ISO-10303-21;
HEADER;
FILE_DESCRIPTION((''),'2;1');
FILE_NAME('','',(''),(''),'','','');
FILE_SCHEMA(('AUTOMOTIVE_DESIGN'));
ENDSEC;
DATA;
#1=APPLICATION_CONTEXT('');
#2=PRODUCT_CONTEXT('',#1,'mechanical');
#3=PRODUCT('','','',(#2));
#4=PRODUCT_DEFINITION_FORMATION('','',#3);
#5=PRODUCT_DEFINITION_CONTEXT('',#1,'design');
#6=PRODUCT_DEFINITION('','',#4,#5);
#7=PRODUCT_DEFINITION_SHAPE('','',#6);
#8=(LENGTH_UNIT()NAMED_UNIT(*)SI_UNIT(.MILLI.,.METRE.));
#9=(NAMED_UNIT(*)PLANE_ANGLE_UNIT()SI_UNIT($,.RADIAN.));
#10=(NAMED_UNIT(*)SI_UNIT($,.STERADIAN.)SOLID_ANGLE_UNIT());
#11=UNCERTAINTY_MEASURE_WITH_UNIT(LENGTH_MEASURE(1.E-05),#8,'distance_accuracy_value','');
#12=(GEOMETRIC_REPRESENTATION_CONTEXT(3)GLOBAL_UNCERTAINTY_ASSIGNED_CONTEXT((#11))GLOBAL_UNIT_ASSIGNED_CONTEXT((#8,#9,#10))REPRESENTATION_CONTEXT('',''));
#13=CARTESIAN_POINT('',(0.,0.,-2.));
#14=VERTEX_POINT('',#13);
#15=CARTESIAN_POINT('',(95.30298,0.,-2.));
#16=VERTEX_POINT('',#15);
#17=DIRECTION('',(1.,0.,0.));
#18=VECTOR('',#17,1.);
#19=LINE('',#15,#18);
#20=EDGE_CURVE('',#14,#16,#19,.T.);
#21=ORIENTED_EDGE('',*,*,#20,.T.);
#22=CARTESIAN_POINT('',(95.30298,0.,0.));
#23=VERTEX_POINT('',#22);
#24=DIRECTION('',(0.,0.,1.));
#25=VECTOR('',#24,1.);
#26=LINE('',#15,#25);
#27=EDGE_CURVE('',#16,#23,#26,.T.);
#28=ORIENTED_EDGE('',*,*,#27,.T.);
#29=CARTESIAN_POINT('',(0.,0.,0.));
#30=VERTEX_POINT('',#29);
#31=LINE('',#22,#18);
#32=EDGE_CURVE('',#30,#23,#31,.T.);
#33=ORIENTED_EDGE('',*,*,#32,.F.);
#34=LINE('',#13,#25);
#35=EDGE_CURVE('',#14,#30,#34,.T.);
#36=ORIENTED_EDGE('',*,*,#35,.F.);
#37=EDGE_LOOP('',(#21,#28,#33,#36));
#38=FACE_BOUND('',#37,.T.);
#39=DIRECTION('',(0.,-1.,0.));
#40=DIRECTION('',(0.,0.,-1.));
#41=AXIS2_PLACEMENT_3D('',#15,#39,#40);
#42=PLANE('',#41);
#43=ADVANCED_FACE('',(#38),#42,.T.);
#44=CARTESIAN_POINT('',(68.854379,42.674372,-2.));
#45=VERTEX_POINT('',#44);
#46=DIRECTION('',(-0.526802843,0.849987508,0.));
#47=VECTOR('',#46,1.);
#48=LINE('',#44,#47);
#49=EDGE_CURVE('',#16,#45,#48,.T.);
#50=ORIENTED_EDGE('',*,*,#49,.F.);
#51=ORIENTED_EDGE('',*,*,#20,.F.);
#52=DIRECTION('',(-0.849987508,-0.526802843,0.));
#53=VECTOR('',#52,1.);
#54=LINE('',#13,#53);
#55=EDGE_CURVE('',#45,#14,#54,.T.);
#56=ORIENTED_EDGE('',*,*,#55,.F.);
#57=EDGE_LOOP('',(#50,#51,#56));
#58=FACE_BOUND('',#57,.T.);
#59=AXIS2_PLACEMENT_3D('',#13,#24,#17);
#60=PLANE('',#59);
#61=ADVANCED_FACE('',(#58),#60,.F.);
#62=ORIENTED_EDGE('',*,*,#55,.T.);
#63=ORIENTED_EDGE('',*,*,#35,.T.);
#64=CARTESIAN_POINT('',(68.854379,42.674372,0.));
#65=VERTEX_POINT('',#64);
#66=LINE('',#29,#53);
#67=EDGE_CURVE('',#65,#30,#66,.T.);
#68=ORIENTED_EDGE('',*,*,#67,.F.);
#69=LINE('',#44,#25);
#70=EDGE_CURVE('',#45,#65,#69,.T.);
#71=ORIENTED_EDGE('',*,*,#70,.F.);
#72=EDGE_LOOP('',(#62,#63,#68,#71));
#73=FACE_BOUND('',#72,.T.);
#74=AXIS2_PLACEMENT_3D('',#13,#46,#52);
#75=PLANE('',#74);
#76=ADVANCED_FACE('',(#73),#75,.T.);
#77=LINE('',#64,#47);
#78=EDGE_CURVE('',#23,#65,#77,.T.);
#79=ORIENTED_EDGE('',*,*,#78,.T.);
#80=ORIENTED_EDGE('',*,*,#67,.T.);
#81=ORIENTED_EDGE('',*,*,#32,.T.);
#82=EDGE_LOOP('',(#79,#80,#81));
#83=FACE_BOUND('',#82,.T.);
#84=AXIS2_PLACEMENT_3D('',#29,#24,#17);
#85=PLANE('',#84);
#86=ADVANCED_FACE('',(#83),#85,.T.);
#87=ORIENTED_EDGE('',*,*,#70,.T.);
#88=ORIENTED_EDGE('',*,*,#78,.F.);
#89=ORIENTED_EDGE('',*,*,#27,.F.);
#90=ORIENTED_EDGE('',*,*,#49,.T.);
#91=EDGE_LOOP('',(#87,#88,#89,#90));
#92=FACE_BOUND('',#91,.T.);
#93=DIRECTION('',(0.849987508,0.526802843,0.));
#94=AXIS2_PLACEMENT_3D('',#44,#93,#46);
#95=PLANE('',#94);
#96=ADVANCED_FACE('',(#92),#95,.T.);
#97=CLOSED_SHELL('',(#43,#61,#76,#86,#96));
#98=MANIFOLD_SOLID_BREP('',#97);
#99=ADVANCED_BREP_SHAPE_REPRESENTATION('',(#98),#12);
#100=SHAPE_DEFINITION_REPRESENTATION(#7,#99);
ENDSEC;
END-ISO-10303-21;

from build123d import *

# Parameters (mm, degrees)
BASE_FLANGE1_DEPTH = 2


# Sheet-metal steps are written as plain solids
with BuildPart() as part:
    # Sketch1 → Base-Flange1 (new body)
    with BuildSketch(Plane.XY):
        Polygon((0, 0), (68.854379434, 42.674371655), (95.30298025, 0), align=None)
    extrude(amount=-BASE_FLANGE1_DEPTH)


solid = part.part
